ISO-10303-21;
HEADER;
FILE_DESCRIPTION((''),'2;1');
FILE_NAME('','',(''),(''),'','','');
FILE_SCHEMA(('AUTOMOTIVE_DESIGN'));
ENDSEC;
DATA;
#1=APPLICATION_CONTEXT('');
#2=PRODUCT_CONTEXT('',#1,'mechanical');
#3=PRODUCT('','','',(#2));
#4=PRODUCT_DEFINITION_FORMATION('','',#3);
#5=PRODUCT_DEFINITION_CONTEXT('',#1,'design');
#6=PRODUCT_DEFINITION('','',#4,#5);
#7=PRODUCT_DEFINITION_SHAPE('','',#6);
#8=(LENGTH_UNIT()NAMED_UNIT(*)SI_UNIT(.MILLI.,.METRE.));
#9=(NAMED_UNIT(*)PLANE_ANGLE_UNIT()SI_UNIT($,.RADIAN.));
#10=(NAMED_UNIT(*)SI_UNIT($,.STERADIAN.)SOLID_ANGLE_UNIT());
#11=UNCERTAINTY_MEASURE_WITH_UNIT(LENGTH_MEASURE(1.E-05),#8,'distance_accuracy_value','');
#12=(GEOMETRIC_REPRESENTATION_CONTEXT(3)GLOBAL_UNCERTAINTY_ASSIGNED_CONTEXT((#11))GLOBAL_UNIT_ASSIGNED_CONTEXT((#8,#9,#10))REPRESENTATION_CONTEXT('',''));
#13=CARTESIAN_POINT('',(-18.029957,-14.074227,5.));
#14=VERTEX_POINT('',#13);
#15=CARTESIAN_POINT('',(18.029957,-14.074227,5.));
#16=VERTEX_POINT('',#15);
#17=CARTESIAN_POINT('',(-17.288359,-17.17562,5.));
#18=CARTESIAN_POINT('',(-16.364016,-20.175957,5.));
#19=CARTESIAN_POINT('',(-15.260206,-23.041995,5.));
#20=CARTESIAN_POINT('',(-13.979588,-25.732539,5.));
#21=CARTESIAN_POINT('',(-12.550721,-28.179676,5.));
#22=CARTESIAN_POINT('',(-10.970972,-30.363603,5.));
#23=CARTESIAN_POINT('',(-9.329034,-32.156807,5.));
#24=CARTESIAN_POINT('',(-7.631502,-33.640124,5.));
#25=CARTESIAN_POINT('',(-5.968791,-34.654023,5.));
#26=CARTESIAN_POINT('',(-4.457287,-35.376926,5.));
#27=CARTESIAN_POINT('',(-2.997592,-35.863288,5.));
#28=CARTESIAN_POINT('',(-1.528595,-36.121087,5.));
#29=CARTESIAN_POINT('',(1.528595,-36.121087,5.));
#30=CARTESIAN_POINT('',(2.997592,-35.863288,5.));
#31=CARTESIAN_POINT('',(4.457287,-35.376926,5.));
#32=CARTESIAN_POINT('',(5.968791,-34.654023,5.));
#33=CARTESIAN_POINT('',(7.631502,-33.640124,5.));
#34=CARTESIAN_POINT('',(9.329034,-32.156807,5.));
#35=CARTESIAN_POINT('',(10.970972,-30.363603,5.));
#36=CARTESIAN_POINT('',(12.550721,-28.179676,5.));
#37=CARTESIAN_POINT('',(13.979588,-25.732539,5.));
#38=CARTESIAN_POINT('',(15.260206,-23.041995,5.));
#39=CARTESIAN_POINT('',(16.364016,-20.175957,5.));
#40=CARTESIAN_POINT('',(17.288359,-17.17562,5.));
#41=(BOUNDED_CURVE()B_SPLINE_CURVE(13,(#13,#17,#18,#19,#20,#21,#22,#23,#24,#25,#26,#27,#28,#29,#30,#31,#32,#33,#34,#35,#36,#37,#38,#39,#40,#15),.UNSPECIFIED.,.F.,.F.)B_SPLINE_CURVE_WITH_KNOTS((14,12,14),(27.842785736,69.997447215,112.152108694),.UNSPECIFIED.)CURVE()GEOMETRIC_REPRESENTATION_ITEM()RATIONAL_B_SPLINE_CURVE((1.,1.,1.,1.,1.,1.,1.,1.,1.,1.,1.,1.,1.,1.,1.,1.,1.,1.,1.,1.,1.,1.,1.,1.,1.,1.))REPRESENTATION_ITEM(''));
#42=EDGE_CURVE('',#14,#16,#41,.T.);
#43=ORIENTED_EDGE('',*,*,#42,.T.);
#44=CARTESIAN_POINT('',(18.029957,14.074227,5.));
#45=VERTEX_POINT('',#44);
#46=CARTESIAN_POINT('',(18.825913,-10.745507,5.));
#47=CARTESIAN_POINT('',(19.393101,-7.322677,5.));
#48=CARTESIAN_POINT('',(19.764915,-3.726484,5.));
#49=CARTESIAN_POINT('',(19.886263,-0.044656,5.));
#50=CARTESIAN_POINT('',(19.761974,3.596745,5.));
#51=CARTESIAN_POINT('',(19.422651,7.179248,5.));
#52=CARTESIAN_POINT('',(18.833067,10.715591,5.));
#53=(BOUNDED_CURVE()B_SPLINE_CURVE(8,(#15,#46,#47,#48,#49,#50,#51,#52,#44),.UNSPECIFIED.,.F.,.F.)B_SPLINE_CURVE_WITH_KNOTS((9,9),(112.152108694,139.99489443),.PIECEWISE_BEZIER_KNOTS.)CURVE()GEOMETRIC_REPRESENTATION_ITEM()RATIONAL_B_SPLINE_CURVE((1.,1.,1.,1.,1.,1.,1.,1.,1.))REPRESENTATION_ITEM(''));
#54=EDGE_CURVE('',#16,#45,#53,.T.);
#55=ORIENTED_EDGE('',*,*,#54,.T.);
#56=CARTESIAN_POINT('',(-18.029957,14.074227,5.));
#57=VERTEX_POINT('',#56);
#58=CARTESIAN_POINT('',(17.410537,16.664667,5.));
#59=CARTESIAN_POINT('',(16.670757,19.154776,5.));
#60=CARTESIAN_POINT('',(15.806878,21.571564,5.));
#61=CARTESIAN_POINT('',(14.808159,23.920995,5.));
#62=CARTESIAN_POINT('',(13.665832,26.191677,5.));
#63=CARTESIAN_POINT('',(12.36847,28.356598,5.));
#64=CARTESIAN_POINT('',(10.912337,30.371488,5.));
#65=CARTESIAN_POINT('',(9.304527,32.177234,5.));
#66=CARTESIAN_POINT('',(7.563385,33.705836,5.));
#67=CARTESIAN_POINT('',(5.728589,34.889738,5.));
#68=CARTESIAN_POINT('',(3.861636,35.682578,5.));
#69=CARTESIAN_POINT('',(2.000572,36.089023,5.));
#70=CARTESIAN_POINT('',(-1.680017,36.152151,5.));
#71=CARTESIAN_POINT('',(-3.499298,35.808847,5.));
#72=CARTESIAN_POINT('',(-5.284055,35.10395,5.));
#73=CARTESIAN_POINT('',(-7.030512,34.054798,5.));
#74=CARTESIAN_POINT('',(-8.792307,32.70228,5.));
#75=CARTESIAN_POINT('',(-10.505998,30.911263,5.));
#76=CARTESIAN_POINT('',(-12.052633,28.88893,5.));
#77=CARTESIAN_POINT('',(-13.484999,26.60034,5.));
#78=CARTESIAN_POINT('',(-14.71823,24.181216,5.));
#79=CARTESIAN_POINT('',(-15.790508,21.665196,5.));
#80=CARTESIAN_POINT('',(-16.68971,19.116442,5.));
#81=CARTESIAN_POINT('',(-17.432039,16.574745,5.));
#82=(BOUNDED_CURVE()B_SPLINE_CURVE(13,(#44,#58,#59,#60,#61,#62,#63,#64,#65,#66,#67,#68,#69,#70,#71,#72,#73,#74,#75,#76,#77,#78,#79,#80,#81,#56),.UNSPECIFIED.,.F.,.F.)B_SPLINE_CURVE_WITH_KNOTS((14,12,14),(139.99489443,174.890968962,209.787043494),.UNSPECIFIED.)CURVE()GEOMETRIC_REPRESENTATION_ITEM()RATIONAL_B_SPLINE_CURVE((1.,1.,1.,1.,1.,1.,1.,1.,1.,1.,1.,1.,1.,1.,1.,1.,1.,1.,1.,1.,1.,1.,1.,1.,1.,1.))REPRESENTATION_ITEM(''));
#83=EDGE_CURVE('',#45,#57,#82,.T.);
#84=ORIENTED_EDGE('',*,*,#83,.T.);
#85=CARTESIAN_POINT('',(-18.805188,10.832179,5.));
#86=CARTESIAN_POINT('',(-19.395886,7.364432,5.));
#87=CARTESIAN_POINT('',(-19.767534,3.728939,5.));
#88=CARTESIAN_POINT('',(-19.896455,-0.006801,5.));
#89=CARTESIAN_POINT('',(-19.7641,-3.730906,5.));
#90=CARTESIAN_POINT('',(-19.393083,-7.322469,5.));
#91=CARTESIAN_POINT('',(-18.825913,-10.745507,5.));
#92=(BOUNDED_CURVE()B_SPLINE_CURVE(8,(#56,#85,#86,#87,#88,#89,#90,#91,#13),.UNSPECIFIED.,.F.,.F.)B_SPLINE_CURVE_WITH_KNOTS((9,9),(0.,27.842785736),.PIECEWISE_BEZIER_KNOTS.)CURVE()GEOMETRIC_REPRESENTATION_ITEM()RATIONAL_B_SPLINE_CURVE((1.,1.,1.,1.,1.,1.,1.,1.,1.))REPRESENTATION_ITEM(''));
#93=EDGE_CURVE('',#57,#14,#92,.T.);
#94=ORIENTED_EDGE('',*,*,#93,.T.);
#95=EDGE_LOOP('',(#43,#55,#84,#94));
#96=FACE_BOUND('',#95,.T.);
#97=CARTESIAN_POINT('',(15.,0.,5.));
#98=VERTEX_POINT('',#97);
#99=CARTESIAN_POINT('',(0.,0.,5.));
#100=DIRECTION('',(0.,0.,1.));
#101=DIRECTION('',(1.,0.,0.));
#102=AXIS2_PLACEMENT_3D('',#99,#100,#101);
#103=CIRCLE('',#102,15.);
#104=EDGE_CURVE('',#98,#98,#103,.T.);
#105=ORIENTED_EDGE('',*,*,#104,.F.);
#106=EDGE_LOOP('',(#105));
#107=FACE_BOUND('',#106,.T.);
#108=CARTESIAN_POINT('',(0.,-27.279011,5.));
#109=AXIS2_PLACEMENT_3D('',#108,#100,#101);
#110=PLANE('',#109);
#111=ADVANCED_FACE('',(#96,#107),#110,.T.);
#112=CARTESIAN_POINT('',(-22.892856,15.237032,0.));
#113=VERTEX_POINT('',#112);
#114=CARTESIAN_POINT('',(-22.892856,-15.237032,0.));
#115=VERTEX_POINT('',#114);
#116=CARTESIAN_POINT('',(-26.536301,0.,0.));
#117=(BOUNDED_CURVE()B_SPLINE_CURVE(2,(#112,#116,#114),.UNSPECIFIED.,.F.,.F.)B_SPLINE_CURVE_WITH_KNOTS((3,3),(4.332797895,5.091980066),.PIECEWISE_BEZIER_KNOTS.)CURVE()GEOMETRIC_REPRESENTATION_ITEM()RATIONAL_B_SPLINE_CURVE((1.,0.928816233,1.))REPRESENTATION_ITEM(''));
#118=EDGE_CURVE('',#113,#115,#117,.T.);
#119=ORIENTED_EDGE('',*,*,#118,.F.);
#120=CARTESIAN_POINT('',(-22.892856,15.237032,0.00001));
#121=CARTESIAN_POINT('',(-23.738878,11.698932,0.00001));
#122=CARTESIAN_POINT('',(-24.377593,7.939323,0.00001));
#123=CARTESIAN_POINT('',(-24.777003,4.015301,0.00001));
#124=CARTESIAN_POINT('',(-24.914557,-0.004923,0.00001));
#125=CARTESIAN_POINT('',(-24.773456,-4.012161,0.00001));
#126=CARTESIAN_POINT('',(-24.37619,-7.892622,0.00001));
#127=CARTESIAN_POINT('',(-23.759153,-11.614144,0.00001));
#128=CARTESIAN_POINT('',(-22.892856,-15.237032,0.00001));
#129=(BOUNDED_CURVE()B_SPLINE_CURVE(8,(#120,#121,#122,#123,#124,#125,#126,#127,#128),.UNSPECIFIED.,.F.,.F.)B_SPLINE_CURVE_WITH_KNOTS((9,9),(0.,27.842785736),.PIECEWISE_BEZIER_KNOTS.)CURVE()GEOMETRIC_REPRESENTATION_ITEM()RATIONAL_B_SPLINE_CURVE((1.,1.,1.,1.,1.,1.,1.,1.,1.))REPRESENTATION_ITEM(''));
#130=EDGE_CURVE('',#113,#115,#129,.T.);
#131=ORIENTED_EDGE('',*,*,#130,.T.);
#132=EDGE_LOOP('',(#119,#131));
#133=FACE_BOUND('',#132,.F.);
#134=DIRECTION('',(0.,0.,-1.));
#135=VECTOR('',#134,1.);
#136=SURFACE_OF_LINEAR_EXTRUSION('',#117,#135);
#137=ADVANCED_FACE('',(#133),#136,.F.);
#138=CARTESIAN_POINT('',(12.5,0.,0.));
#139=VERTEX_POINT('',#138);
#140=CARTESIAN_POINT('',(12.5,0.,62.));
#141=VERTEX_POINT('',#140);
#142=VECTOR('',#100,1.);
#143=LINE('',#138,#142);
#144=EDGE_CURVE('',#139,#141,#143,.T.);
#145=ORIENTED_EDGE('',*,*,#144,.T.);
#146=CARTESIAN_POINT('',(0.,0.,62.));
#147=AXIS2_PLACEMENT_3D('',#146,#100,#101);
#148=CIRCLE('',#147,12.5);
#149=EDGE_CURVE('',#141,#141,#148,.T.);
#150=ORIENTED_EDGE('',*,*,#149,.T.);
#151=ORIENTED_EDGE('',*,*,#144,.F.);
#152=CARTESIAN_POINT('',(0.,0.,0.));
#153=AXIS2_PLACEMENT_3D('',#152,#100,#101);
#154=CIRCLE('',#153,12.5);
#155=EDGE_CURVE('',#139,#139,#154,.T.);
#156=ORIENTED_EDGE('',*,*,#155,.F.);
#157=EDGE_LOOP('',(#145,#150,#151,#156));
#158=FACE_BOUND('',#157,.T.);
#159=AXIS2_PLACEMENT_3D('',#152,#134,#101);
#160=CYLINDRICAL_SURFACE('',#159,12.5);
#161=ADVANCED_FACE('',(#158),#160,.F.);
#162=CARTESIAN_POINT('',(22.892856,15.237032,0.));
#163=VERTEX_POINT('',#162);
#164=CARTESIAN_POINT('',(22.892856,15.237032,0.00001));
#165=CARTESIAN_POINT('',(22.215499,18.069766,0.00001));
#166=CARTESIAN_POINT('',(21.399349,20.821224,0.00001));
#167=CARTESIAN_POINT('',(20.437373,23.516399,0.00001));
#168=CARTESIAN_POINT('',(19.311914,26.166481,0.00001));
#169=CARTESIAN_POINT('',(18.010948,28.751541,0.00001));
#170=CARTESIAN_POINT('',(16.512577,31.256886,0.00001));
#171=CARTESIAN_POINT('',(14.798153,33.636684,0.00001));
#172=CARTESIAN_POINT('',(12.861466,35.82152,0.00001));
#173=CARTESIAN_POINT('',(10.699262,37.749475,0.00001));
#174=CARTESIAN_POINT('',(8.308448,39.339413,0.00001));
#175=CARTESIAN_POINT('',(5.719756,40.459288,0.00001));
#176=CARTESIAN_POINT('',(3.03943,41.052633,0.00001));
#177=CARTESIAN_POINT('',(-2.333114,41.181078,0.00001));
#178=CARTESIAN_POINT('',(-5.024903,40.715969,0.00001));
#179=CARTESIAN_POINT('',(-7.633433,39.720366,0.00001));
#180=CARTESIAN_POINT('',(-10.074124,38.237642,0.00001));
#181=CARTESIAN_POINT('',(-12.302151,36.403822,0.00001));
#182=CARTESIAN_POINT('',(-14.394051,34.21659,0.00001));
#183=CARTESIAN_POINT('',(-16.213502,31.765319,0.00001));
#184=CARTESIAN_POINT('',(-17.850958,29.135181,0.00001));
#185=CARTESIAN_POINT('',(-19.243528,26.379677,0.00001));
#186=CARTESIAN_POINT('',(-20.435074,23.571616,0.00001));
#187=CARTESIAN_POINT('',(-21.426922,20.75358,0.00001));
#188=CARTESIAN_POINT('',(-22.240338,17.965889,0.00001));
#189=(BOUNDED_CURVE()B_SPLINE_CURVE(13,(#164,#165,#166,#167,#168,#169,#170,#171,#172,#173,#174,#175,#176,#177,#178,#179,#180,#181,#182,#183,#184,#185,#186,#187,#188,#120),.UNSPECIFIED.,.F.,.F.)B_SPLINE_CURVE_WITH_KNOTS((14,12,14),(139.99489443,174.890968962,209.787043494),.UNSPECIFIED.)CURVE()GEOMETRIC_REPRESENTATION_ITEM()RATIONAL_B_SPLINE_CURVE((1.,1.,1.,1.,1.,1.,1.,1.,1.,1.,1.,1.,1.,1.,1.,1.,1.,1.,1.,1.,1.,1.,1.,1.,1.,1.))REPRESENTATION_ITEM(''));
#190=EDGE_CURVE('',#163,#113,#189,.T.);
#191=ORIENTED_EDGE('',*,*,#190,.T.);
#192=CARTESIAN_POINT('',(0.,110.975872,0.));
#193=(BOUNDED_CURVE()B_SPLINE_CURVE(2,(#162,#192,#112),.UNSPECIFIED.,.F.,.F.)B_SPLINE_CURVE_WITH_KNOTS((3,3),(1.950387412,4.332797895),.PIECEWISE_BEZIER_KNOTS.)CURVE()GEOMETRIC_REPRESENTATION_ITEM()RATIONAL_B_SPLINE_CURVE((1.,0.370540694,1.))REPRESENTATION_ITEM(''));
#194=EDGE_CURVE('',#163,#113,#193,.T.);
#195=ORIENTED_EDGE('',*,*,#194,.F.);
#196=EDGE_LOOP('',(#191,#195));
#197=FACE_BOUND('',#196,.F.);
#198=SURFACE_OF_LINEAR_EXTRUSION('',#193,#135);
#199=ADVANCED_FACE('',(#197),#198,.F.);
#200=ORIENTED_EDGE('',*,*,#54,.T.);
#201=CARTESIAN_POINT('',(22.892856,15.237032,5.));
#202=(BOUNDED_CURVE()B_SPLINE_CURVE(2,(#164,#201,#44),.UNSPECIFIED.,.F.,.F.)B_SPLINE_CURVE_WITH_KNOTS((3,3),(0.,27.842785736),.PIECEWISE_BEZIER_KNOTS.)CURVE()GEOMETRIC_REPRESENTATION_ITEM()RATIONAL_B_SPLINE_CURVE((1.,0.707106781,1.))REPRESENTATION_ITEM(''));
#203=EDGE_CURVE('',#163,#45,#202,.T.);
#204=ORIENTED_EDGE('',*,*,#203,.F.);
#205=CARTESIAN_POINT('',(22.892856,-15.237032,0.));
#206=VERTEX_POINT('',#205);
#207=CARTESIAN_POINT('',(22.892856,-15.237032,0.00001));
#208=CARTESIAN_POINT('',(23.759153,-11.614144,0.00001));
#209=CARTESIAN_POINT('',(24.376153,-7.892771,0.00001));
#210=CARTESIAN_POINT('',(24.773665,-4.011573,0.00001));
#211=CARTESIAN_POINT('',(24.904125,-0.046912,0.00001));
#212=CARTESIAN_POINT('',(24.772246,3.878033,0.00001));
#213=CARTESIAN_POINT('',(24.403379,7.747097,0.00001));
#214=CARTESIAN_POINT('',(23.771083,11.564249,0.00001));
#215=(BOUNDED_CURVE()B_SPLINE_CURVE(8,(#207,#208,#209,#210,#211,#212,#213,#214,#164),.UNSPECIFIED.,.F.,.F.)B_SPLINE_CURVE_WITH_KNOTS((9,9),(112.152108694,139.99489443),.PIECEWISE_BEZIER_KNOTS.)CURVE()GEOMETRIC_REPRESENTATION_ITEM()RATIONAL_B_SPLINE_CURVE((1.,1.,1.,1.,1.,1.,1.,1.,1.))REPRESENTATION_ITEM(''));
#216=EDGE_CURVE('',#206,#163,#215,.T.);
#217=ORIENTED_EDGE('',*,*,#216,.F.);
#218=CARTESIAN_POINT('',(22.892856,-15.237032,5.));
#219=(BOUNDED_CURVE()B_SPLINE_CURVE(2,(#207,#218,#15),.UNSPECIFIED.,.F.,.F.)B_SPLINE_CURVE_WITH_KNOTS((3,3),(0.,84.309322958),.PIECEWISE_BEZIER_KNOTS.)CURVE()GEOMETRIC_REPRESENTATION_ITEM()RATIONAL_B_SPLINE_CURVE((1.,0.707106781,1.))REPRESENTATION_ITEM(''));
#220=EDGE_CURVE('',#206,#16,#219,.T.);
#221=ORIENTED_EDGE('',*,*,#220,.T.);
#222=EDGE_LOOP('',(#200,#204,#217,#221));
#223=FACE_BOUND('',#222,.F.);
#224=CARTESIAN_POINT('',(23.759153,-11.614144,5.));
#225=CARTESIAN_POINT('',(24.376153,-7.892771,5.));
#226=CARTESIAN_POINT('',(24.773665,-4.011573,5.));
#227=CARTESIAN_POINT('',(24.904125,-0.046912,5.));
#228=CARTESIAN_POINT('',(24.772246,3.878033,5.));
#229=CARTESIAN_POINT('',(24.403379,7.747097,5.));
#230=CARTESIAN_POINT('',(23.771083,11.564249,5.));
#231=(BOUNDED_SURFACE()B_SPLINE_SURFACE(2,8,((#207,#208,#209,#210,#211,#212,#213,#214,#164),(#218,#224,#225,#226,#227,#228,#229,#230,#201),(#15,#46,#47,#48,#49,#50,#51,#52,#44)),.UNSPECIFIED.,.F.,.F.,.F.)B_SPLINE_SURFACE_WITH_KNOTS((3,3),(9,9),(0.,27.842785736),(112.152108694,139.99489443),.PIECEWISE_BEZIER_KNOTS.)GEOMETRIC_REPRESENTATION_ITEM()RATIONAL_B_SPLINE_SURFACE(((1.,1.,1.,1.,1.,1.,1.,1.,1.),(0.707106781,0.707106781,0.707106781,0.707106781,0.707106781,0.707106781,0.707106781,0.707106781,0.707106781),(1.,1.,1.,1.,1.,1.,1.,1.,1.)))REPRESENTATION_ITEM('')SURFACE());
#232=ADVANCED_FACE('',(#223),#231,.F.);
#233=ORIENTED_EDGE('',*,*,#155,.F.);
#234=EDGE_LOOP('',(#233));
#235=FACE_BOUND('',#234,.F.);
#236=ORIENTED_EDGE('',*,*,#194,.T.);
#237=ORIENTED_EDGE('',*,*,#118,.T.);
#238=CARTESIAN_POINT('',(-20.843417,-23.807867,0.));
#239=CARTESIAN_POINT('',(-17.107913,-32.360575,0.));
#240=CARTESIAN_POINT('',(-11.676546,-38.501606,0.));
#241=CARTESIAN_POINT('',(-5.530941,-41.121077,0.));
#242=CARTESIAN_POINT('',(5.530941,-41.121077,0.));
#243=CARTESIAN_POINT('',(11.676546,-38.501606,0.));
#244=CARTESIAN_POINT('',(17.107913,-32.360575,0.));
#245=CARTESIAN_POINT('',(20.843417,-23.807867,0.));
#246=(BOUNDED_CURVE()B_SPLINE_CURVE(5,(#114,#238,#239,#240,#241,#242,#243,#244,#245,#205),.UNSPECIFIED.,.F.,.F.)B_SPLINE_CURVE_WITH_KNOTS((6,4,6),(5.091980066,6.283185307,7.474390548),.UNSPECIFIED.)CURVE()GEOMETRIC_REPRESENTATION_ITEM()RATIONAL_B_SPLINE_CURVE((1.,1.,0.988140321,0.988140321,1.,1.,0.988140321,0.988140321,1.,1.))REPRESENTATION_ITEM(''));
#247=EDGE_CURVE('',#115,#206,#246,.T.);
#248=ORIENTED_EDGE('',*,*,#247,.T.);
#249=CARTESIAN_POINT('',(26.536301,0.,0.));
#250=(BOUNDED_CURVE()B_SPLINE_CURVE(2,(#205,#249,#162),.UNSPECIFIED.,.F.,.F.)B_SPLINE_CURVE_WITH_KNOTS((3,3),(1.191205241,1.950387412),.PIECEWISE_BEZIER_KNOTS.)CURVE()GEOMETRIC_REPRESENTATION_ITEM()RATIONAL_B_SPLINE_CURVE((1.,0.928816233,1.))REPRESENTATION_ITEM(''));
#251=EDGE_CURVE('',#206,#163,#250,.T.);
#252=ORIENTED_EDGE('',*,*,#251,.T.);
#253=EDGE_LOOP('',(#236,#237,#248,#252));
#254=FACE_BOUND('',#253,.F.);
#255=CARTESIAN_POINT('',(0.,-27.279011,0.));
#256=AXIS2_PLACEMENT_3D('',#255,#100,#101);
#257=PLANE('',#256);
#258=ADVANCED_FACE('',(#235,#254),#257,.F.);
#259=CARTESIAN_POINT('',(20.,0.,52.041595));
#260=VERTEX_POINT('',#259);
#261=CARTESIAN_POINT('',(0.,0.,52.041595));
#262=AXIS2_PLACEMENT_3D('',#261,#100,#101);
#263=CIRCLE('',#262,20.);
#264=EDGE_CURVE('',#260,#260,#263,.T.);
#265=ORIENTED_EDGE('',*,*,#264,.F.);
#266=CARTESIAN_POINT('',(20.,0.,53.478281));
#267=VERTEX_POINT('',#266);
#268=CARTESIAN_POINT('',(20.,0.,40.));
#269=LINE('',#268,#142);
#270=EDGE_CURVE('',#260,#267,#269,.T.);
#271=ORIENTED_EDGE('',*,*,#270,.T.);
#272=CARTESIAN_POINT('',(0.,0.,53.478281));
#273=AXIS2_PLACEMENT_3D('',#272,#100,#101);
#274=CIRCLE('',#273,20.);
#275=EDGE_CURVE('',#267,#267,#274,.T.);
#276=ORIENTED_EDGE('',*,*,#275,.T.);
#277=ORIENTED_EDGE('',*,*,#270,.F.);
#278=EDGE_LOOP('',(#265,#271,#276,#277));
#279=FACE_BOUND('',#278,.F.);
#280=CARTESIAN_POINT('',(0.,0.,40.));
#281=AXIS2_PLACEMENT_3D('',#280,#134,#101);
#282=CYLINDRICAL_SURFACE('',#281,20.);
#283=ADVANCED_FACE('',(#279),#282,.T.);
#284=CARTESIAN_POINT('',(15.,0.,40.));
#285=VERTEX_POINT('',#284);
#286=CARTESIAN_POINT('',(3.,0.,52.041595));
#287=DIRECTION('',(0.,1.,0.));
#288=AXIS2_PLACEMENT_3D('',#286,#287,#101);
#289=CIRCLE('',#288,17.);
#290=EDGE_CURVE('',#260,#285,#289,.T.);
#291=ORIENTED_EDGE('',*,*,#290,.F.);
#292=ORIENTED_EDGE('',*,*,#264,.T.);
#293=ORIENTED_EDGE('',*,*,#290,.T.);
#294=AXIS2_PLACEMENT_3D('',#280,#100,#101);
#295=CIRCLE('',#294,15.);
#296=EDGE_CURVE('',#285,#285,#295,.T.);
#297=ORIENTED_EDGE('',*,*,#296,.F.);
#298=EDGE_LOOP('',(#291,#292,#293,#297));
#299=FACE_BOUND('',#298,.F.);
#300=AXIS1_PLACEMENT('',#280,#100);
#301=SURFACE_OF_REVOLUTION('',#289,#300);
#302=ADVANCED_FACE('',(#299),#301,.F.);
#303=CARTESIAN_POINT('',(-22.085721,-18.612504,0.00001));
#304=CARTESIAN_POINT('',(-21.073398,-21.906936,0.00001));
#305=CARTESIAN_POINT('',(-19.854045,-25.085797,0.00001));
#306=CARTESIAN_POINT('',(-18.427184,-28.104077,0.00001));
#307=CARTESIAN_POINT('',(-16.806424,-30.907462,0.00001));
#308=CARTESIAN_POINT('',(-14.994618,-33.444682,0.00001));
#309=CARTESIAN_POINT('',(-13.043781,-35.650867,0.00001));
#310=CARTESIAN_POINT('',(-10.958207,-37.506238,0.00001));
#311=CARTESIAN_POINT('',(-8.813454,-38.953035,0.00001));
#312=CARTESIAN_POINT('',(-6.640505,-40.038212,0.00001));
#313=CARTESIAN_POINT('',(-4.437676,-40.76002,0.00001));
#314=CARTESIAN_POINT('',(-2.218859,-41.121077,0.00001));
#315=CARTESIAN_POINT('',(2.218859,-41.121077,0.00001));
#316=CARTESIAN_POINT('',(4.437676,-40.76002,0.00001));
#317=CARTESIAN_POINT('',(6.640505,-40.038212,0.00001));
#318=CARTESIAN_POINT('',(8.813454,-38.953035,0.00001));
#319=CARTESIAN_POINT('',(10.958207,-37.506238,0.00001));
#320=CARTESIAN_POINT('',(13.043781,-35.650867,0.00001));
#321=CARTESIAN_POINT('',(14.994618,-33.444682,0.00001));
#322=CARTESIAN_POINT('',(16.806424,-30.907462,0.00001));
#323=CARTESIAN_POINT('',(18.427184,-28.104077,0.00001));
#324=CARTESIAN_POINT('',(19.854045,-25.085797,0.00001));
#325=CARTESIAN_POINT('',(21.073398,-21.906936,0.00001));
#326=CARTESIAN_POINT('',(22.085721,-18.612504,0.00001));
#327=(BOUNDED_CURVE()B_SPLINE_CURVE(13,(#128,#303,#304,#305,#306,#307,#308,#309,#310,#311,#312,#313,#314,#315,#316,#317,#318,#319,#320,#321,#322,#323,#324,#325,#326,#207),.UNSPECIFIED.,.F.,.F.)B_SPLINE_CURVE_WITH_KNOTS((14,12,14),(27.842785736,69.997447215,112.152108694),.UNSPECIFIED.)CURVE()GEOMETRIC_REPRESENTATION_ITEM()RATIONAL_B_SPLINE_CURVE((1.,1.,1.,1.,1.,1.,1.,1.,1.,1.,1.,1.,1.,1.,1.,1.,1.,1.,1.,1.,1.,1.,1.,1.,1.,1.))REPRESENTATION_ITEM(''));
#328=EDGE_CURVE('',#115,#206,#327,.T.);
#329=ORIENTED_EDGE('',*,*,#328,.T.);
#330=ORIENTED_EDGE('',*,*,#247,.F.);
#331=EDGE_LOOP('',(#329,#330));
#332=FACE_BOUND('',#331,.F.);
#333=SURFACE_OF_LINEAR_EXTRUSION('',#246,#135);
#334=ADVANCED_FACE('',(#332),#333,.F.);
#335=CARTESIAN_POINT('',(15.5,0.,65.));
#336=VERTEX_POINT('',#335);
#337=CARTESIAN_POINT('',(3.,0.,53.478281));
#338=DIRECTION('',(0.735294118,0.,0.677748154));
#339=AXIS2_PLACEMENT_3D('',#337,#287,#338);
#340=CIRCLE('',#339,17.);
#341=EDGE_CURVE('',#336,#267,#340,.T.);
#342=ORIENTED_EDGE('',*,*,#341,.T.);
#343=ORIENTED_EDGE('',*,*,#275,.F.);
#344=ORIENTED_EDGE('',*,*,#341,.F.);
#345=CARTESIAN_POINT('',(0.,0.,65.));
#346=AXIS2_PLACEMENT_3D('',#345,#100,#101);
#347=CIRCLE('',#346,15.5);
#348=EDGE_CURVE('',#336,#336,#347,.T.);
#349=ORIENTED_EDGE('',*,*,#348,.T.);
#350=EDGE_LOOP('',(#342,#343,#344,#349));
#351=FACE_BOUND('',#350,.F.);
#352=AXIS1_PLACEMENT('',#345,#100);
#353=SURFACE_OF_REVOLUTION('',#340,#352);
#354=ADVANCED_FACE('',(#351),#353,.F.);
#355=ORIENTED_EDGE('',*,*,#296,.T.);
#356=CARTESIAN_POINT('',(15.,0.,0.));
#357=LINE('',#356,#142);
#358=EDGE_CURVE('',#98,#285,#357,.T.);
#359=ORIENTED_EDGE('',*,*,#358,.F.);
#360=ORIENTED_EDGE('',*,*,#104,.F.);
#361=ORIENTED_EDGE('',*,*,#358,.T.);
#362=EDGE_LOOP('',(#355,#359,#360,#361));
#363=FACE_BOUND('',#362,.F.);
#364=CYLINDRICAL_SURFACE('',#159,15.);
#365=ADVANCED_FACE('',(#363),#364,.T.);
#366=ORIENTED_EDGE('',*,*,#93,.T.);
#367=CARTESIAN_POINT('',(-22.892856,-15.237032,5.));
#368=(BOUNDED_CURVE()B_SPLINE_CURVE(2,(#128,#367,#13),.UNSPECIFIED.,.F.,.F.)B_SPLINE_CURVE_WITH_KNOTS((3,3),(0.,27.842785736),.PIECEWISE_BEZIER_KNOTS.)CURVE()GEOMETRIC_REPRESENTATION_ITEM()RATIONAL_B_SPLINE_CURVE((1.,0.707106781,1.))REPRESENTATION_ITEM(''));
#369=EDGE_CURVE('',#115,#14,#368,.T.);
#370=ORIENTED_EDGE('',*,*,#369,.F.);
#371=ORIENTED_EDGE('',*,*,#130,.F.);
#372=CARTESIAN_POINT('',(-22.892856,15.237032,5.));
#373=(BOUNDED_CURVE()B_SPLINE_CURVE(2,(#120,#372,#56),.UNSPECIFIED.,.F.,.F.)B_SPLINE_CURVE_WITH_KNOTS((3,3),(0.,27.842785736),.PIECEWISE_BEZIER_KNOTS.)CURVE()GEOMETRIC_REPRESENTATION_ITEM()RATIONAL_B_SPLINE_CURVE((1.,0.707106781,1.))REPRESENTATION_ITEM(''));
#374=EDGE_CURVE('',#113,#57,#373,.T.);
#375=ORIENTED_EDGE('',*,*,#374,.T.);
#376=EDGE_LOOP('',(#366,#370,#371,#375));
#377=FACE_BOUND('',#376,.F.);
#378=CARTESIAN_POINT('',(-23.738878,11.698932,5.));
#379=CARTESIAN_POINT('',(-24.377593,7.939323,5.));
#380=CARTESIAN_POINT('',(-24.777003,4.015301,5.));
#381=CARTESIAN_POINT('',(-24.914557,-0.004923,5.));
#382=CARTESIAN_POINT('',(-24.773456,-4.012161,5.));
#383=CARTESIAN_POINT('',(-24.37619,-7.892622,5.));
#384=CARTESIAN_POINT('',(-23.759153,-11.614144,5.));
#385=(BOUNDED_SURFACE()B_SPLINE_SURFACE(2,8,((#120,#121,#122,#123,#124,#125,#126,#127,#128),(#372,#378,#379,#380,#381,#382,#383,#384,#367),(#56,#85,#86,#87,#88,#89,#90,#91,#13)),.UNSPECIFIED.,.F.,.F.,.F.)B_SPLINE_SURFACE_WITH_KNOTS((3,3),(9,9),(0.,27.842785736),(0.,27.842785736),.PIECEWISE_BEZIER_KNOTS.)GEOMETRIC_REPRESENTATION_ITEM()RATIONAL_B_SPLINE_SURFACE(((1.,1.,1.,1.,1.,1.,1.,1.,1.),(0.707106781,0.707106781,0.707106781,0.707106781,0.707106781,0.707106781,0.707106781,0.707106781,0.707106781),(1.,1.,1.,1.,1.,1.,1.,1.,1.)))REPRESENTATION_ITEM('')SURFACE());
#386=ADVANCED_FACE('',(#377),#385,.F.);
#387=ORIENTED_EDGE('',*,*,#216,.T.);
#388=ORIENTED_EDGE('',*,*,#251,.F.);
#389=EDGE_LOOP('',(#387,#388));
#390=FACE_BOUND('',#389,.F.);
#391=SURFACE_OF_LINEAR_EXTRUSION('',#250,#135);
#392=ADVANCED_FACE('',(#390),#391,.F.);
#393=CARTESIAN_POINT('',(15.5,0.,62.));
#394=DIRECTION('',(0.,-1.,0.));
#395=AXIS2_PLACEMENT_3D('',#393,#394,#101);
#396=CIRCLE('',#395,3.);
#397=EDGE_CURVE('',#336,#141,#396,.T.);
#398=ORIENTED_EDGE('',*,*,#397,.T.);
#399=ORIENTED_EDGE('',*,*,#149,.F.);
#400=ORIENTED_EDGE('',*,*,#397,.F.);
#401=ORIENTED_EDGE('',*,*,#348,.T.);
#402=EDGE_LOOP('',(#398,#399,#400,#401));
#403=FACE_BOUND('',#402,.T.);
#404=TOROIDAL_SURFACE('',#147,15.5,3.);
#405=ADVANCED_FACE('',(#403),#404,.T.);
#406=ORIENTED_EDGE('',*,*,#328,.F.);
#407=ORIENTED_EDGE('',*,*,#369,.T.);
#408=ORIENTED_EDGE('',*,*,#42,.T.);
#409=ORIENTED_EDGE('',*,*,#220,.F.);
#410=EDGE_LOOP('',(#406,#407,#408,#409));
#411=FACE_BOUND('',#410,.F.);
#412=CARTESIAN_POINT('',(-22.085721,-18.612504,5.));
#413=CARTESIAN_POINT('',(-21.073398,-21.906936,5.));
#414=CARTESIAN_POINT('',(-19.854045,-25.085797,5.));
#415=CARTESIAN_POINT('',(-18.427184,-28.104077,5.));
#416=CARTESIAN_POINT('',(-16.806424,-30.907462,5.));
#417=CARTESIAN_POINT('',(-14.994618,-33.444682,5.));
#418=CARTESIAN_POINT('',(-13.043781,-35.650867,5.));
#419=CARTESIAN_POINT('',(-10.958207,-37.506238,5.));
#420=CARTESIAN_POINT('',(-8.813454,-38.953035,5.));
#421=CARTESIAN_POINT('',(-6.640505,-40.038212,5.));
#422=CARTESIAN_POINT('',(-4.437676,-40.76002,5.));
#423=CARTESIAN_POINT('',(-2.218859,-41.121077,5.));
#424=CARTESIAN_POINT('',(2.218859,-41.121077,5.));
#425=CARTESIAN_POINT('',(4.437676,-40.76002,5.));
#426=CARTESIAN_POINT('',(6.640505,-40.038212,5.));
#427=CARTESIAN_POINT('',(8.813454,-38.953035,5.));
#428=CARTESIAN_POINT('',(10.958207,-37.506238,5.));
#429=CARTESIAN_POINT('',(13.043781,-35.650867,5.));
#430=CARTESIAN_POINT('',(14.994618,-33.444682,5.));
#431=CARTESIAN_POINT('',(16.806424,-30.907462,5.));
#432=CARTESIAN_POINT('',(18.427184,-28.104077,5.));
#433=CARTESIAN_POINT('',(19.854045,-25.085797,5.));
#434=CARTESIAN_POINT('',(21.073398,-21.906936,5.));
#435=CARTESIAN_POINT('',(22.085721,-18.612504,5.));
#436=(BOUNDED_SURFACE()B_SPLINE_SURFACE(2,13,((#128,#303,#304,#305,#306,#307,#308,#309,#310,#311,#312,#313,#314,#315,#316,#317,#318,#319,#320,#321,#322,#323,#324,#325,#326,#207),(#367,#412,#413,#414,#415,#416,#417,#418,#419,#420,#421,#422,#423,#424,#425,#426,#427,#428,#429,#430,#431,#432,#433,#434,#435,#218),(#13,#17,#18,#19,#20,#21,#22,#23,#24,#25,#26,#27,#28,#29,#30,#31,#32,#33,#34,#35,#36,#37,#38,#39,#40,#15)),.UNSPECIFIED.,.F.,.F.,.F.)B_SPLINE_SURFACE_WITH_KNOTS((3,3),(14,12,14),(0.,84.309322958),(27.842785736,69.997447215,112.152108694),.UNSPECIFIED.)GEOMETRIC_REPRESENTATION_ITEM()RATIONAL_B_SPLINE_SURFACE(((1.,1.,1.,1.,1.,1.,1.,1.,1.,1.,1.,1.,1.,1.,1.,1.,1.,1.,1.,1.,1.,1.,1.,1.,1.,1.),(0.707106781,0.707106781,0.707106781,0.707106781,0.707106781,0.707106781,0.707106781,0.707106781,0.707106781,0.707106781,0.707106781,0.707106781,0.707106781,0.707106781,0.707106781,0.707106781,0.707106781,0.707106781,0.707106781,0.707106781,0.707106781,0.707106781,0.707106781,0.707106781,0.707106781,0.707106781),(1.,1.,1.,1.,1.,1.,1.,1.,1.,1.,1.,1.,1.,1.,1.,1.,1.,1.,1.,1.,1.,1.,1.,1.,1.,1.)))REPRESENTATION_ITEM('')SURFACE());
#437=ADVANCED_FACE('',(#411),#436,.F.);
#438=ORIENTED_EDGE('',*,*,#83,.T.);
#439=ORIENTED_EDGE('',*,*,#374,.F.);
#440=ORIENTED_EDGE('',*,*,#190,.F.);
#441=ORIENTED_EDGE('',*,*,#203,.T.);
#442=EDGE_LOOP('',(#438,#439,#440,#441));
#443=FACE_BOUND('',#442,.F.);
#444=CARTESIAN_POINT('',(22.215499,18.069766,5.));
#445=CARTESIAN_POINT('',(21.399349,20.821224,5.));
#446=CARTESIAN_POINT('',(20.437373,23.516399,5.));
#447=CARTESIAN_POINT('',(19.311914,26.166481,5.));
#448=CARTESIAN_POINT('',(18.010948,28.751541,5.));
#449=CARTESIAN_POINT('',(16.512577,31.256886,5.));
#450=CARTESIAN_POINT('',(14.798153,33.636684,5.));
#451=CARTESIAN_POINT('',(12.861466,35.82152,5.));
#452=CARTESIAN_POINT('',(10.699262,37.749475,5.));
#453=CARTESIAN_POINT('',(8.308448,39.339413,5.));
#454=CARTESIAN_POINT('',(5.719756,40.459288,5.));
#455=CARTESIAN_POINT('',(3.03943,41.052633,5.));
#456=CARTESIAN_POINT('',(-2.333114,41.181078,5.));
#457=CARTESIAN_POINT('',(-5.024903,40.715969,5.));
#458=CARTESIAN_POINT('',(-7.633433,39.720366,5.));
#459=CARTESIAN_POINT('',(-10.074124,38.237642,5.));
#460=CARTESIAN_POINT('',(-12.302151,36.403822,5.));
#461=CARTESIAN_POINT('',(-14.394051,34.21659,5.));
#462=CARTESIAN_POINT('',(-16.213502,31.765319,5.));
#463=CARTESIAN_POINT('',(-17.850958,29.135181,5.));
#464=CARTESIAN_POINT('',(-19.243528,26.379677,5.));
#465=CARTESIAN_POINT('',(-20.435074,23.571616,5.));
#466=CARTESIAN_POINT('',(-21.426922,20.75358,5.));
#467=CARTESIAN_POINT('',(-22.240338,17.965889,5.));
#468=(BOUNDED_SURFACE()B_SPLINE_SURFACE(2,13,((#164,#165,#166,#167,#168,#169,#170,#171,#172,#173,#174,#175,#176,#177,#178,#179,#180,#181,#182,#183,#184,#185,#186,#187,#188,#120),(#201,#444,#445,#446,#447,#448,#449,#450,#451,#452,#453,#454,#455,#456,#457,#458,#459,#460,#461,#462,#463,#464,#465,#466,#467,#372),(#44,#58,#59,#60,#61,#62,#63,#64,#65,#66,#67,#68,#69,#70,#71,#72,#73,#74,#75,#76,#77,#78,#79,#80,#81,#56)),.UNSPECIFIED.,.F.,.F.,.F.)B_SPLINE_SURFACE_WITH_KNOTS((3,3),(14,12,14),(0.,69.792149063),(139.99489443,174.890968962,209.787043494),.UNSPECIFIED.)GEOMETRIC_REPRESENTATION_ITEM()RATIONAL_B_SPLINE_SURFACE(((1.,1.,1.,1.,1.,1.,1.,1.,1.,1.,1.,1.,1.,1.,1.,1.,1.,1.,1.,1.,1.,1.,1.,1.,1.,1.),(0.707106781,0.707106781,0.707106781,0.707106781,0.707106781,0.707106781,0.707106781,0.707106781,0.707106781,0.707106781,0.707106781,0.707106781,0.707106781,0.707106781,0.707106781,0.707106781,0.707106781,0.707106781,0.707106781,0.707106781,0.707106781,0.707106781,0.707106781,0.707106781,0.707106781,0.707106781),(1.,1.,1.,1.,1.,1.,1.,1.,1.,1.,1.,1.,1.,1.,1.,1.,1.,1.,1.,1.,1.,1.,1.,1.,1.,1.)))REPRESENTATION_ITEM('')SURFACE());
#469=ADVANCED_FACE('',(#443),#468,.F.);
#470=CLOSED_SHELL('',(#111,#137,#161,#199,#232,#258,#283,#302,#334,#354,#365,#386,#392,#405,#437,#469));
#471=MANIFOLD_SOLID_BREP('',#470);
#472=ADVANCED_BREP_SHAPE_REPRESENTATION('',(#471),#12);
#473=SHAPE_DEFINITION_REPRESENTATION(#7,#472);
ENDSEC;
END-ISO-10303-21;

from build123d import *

# Parameters (mm, degrees)
F0_R     = 20
F0_R_2   = 15
F1_DEPTH = 5
F2_R     = 4.99999
F3_START = 40
F3_DEPTH = 25
F0_R_3   = 12.5
F4_DEPTH = 65
F5_R     = 3


# Not quite as in the source:
# - a fillet or chamfer that OpenCascade refuses, or shapes differently, is made with other operations: its cross-section is extruded or revolved along the edge and cut away or added
# - a fillet or chamfer is up to 0.001 mm smaller than in the source, because OpenCascade refuses the exact size


with BuildPart() as f1:
    # F0 (on Top) → F1 (new body)
    with BuildSketch(Plane.XY):
        with BuildLine():
            add(Edge.make_bspline(
                [(-22.8928557761, -15.2370323363), (-16.7035213729, -41.1210767925), (0, -41.1210767925)],
                knots=[5.091980066, 5.091980066, 5.091980066, 6.2831853072, 6.2831853072, 6.2831853072], degree=2, weights=[1, 0.8278105744, 1]))
            add(Edge.make_bspline(
                [(0, -41.1210767925), (16.7035213729, -41.1210767925), (22.8928557761, -15.2370323363)],
                knots=[0, 0, 0, 1.1912052412, 1.1912052412, 1.1912052412], degree=2, weights=[1, 0.8278105744, 1]))
            ThreePointArc((22.8928557761, -15.2370323363), (0, -27.5), (-22.8928557761, -15.2370323363))
        make_face()
        with BuildLine():
            ThreePointArc((-22.8928557761, 15.2370323363), (0, 27.5), (22.8928557761, 15.2370323363))
            add(Edge.make_bspline(
                [(22.8928557761, 15.2370323363), (0, 110.9758724176), (-22.8928557761, 15.2370323363)],
                knots=[1.9503874124, 1.9503874124, 1.9503874124, 4.3327978948, 4.3327978948, 4.3327978948], degree=2, weights=[1, 0.3705406941, 1]))
        make_face()
        with BuildLine():
            ThreePointArc((-22.8928557761, -15.2370323363), (0, -27.5), (22.8928557761, -15.2370323363))
            add(Edge.make_bspline(
                [(22.8928557761, -15.2370323363), (26.5363006249, 0), (22.8928557761, 15.2370323363)],
                knots=[1.1912052412, 1.1912052412, 1.1912052412, 1.9503874124, 1.9503874124, 1.9503874124], degree=2, weights=[1, 0.9288162326, 1]))
            ThreePointArc((22.8928557761, 15.2370323363), (0, 27.5), (-22.8928557761, 15.2370323363))
            add(Edge.make_bspline(
                [(-22.8928557761, 15.2370323363), (-26.5363006249, 0), (-22.8928557761, -15.2370323363)],
                knots=[4.3327978948, 4.3327978948, 4.3327978948, 5.091980066, 5.091980066, 5.091980066], degree=2, weights=[1, 0.9288162326, 1]))
        make_face()
        Circle(F0_R, mode=Mode.SUBTRACT)
        Circle(F0_R)
        Circle(F0_R_2, mode=Mode.SUBTRACT)
    extrude(amount=F1_DEPTH)

    # F2 (radius 5 in the source; OpenCascade refuses exactly that, so slightly less here)
    f2_edges = [f1.edges().sort_by_distance(p)[0] for p in [
        (-22.892856, 15.237032, 5),
    ]]
    fillet(f2_edges, radius=F2_R)



with BuildPart() as f3:
    # F0 (on Top) → F3 (new body)
    with BuildSketch(Plane.XY.offset(F3_START)):
        Circle(F0_R)
        Circle(F0_R_2, mode=Mode.SUBTRACT)
    extrude(amount=F3_DEPTH)


with BuildPart() as f1_1:
    add(f1.part)

    add(f3.part)  # F4 merges F3
    # F0 (on Top) → F4 (join)
    with BuildSketch(Plane.XY):
        Circle(F0_R_2)
        Circle(F0_R_3, mode=Mode.SUBTRACT)
    extrude(amount=F4_DEPTH)

    # F5
    f5_edges = [f1_1.edges().sort_by_distance(p)[0] for p in [
        (-12.5, 0, 65),
    ]]
    fillet(f5_edges, radius=F5_R)

    # F6: fillet of radius 17 on 3 edges, made by hand

    # F6_s1 → F6_t2 (revolve, cut)
    with BuildSketch(Plane.XZ):
        with BuildLine():
            ThreePointArc((20, 52.0415945788), (18.7003184681, 45.5223921736), (15, 40))
            Line((15, 40), (15.24, 39.7591681084))
            ThreePointArc((15.24, 39.7591681084), (17.5, 39.66), (20, 39.66))
            Line((20, 39.66), (20.34, 40))
            Line((20.34, 40), (20.34, 52.0415945788))
            Line((20.34, 52.0415945788), (20, 52.0415945788))
        make_face()
    revolve(axis=Axis((0, 0, 40), (0, 0, 1)), mode=Mode.SUBTRACT)

    # F6_s3 → F6_t4 (revolve, cut)
    with BuildSketch(Plane.XZ):
        with BuildLine():
            ThreePointArc((15.5, 65), (18.8350876221, 59.6629398166), (20, 53.4782813782))
            Line((20, 53.4782813782), (20.34, 53.4782813782))
            Line((20.34, 53.4782813782), (20.34, 65))
            Line((20.34, 65), (20, 65.34))
            ThreePointArc((20, 65.34), (17.75, 65.34), (15.75, 65.2304343724))
            Line((15.75, 65.2304343724), (15.5, 65))
        make_face()
    revolve(axis=Axis((0, 0, 65), (0, 0, 1)), mode=Mode.SUBTRACT)


solid = f1_1.part
